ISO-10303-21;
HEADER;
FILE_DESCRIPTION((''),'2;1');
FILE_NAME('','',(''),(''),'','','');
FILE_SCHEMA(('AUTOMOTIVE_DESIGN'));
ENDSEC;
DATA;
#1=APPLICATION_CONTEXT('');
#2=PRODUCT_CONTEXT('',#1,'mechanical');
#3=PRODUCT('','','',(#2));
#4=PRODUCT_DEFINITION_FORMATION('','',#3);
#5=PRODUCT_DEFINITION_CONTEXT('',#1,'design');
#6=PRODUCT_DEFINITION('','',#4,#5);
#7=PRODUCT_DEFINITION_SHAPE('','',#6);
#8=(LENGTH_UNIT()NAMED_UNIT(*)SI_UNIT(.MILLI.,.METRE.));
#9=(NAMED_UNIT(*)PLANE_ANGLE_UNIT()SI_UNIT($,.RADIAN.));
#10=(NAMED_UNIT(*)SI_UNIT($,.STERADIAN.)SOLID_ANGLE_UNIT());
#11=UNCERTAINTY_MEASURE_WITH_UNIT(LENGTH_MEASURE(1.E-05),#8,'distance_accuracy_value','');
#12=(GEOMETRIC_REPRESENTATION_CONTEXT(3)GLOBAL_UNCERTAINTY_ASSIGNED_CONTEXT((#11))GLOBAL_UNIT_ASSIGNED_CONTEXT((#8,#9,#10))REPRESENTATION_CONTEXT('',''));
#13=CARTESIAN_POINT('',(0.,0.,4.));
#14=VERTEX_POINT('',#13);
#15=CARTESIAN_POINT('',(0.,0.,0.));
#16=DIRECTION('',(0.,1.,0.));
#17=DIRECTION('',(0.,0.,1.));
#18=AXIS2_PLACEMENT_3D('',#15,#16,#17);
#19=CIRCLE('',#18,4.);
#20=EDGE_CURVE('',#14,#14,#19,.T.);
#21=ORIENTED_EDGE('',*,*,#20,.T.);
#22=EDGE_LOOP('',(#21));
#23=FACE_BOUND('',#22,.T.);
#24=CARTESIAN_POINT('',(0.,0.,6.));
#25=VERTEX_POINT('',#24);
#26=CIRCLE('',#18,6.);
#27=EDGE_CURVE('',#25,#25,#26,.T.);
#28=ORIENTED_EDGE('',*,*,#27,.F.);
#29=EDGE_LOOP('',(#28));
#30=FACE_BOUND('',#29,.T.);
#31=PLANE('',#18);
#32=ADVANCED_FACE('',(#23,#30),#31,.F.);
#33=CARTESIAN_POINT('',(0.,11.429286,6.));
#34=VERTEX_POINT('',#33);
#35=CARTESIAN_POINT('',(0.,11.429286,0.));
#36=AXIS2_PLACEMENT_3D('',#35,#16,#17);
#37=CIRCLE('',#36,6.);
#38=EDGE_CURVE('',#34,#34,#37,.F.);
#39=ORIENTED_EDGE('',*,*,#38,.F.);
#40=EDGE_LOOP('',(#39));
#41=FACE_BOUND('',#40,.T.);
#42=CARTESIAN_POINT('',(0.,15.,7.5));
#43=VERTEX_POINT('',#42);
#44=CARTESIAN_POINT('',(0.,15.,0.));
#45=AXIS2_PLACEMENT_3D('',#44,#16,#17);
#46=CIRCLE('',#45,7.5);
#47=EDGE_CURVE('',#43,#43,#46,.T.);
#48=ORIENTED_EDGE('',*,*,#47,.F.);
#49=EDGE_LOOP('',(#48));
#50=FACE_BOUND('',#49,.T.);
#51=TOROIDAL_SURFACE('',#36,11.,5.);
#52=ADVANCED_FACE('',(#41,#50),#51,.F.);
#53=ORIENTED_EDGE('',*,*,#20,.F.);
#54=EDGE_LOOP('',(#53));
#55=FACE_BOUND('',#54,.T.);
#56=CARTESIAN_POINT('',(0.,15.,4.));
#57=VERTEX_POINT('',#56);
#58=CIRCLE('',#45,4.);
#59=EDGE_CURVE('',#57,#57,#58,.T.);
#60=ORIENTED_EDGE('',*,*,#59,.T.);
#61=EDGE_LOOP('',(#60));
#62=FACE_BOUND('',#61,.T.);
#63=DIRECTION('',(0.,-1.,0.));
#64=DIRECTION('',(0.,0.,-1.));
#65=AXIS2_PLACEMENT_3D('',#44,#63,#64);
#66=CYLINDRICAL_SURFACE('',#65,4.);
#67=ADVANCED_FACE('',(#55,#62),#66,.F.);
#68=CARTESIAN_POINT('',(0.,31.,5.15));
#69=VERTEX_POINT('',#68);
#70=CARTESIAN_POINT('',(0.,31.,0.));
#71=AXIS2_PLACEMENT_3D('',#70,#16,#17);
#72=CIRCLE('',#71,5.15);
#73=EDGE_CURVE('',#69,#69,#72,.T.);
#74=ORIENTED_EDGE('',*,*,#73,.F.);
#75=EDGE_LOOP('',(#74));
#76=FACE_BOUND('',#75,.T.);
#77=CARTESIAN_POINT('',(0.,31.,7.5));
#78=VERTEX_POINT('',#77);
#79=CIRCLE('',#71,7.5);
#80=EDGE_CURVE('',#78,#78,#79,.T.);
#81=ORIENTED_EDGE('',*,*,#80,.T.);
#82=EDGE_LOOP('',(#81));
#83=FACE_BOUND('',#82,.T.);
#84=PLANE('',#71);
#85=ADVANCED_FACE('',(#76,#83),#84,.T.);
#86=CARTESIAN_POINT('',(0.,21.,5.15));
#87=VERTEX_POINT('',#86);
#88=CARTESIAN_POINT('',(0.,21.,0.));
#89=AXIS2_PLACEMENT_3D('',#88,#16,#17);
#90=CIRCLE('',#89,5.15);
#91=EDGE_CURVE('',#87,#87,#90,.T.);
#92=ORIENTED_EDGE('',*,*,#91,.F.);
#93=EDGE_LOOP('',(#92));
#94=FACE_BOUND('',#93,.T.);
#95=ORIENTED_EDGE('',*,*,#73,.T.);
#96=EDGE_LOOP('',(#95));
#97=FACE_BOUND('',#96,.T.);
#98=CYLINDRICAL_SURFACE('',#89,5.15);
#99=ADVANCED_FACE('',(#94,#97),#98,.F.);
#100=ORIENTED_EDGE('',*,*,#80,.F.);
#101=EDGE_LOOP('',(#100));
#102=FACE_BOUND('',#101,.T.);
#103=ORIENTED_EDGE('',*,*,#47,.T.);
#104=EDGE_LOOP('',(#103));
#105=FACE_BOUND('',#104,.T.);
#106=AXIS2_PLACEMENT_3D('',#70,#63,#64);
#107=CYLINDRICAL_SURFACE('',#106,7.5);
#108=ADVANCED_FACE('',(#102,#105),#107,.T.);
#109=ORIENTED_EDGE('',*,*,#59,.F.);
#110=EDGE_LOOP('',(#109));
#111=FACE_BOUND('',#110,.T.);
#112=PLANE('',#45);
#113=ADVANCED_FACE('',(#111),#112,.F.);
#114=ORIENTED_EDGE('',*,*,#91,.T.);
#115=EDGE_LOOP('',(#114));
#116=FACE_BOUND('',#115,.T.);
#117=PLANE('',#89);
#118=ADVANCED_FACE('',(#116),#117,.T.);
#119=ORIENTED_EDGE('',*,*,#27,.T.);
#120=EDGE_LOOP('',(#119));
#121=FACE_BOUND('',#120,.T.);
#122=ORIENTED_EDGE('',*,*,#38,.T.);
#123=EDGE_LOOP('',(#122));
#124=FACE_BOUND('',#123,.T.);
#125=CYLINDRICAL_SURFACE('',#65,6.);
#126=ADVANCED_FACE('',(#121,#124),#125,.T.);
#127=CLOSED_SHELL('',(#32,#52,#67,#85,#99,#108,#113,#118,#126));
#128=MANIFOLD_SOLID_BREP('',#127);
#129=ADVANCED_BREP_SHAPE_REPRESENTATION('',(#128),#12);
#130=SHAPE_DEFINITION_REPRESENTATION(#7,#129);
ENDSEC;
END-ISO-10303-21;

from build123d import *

# Parameters (mm, degrees)
SKETCH1_R           = 6
SKETCH1_R_2         = 4
BOSS_EXTRUDE1_DEPTH = 15
SKETCH2_R           = 7.5
BOSS_EXTRUDE2_DEPTH = 16
FILLET1_R           = 5
SKETCH3_R           = 5.15
CUT_EXTRUDE1_DEPTH  = 10


with BuildPart() as part:
    # Sketch1 → Boss-Extrude1 (new body)
    with BuildSketch(Plane(origin=(0, 0, 0), x_dir=(1, 0, 0), z_dir=(0, 1, 0))):
        with Locations(Location((0, 0, 0), (0, 0, 270))):
            Circle(SKETCH1_R)
        with Locations(Location((0, 0, 0), (0, 0, 270))):
            Circle(SKETCH1_R_2, mode=Mode.SUBTRACT)
    extrude(amount=BOSS_EXTRUDE1_DEPTH)

    # Sketch2 → Boss-Extrude2 (add)
    with BuildSketch(Plane(origin=(0, 15, 0), x_dir=(1, 0, 0), z_dir=(0, 1, 0))):
        with Locations(Location((0, 0, 0), (0, 0, 270))):
            Circle(SKETCH2_R)
    extrude(amount=BOSS_EXTRUDE2_DEPTH)

    # Fillet1
    # the kernel refuses this fillet: 5 mm, written as the material it adds along each edge
    with BuildSketch(Plane(origin=(0, 15, 0), x_dir=(0, 0, 1), z_dir=(-1, 0, 0))) as fillet1_piece_1:
        with BuildLine():
            CenterArc((11, -3.570714214), FILLET1_R, 134.427004001, 45.572995999)
            Line((6, -3.570714214), (5.9, -3.570714214))
            Line((5.9, -3.570714214), (5.9, 0))
            Line((5.9, 0), (6, 0.1))
            ThreePointArc((6, 0.1), (6.75, 0.1), (7.43, 0.071414284))
            Line((7.43, 0.071414284), (7.5, 0))
        make_face()
    revolve(axis=Axis((0, 15, 0), (0, 1, 0)))

    # Sketch3 → Cut-Extrude1 (cut)
    with BuildSketch(Plane(origin=(0, 31, 0), x_dir=(1, 0, 0), z_dir=(0, 1, 0))):
        with Locations(Location((0, 0, 0), (0, 0, 270))):
            Circle(SKETCH3_R)
    extrude(amount=-CUT_EXTRUDE1_DEPTH, mode=Mode.SUBTRACT)


solid = part.part
